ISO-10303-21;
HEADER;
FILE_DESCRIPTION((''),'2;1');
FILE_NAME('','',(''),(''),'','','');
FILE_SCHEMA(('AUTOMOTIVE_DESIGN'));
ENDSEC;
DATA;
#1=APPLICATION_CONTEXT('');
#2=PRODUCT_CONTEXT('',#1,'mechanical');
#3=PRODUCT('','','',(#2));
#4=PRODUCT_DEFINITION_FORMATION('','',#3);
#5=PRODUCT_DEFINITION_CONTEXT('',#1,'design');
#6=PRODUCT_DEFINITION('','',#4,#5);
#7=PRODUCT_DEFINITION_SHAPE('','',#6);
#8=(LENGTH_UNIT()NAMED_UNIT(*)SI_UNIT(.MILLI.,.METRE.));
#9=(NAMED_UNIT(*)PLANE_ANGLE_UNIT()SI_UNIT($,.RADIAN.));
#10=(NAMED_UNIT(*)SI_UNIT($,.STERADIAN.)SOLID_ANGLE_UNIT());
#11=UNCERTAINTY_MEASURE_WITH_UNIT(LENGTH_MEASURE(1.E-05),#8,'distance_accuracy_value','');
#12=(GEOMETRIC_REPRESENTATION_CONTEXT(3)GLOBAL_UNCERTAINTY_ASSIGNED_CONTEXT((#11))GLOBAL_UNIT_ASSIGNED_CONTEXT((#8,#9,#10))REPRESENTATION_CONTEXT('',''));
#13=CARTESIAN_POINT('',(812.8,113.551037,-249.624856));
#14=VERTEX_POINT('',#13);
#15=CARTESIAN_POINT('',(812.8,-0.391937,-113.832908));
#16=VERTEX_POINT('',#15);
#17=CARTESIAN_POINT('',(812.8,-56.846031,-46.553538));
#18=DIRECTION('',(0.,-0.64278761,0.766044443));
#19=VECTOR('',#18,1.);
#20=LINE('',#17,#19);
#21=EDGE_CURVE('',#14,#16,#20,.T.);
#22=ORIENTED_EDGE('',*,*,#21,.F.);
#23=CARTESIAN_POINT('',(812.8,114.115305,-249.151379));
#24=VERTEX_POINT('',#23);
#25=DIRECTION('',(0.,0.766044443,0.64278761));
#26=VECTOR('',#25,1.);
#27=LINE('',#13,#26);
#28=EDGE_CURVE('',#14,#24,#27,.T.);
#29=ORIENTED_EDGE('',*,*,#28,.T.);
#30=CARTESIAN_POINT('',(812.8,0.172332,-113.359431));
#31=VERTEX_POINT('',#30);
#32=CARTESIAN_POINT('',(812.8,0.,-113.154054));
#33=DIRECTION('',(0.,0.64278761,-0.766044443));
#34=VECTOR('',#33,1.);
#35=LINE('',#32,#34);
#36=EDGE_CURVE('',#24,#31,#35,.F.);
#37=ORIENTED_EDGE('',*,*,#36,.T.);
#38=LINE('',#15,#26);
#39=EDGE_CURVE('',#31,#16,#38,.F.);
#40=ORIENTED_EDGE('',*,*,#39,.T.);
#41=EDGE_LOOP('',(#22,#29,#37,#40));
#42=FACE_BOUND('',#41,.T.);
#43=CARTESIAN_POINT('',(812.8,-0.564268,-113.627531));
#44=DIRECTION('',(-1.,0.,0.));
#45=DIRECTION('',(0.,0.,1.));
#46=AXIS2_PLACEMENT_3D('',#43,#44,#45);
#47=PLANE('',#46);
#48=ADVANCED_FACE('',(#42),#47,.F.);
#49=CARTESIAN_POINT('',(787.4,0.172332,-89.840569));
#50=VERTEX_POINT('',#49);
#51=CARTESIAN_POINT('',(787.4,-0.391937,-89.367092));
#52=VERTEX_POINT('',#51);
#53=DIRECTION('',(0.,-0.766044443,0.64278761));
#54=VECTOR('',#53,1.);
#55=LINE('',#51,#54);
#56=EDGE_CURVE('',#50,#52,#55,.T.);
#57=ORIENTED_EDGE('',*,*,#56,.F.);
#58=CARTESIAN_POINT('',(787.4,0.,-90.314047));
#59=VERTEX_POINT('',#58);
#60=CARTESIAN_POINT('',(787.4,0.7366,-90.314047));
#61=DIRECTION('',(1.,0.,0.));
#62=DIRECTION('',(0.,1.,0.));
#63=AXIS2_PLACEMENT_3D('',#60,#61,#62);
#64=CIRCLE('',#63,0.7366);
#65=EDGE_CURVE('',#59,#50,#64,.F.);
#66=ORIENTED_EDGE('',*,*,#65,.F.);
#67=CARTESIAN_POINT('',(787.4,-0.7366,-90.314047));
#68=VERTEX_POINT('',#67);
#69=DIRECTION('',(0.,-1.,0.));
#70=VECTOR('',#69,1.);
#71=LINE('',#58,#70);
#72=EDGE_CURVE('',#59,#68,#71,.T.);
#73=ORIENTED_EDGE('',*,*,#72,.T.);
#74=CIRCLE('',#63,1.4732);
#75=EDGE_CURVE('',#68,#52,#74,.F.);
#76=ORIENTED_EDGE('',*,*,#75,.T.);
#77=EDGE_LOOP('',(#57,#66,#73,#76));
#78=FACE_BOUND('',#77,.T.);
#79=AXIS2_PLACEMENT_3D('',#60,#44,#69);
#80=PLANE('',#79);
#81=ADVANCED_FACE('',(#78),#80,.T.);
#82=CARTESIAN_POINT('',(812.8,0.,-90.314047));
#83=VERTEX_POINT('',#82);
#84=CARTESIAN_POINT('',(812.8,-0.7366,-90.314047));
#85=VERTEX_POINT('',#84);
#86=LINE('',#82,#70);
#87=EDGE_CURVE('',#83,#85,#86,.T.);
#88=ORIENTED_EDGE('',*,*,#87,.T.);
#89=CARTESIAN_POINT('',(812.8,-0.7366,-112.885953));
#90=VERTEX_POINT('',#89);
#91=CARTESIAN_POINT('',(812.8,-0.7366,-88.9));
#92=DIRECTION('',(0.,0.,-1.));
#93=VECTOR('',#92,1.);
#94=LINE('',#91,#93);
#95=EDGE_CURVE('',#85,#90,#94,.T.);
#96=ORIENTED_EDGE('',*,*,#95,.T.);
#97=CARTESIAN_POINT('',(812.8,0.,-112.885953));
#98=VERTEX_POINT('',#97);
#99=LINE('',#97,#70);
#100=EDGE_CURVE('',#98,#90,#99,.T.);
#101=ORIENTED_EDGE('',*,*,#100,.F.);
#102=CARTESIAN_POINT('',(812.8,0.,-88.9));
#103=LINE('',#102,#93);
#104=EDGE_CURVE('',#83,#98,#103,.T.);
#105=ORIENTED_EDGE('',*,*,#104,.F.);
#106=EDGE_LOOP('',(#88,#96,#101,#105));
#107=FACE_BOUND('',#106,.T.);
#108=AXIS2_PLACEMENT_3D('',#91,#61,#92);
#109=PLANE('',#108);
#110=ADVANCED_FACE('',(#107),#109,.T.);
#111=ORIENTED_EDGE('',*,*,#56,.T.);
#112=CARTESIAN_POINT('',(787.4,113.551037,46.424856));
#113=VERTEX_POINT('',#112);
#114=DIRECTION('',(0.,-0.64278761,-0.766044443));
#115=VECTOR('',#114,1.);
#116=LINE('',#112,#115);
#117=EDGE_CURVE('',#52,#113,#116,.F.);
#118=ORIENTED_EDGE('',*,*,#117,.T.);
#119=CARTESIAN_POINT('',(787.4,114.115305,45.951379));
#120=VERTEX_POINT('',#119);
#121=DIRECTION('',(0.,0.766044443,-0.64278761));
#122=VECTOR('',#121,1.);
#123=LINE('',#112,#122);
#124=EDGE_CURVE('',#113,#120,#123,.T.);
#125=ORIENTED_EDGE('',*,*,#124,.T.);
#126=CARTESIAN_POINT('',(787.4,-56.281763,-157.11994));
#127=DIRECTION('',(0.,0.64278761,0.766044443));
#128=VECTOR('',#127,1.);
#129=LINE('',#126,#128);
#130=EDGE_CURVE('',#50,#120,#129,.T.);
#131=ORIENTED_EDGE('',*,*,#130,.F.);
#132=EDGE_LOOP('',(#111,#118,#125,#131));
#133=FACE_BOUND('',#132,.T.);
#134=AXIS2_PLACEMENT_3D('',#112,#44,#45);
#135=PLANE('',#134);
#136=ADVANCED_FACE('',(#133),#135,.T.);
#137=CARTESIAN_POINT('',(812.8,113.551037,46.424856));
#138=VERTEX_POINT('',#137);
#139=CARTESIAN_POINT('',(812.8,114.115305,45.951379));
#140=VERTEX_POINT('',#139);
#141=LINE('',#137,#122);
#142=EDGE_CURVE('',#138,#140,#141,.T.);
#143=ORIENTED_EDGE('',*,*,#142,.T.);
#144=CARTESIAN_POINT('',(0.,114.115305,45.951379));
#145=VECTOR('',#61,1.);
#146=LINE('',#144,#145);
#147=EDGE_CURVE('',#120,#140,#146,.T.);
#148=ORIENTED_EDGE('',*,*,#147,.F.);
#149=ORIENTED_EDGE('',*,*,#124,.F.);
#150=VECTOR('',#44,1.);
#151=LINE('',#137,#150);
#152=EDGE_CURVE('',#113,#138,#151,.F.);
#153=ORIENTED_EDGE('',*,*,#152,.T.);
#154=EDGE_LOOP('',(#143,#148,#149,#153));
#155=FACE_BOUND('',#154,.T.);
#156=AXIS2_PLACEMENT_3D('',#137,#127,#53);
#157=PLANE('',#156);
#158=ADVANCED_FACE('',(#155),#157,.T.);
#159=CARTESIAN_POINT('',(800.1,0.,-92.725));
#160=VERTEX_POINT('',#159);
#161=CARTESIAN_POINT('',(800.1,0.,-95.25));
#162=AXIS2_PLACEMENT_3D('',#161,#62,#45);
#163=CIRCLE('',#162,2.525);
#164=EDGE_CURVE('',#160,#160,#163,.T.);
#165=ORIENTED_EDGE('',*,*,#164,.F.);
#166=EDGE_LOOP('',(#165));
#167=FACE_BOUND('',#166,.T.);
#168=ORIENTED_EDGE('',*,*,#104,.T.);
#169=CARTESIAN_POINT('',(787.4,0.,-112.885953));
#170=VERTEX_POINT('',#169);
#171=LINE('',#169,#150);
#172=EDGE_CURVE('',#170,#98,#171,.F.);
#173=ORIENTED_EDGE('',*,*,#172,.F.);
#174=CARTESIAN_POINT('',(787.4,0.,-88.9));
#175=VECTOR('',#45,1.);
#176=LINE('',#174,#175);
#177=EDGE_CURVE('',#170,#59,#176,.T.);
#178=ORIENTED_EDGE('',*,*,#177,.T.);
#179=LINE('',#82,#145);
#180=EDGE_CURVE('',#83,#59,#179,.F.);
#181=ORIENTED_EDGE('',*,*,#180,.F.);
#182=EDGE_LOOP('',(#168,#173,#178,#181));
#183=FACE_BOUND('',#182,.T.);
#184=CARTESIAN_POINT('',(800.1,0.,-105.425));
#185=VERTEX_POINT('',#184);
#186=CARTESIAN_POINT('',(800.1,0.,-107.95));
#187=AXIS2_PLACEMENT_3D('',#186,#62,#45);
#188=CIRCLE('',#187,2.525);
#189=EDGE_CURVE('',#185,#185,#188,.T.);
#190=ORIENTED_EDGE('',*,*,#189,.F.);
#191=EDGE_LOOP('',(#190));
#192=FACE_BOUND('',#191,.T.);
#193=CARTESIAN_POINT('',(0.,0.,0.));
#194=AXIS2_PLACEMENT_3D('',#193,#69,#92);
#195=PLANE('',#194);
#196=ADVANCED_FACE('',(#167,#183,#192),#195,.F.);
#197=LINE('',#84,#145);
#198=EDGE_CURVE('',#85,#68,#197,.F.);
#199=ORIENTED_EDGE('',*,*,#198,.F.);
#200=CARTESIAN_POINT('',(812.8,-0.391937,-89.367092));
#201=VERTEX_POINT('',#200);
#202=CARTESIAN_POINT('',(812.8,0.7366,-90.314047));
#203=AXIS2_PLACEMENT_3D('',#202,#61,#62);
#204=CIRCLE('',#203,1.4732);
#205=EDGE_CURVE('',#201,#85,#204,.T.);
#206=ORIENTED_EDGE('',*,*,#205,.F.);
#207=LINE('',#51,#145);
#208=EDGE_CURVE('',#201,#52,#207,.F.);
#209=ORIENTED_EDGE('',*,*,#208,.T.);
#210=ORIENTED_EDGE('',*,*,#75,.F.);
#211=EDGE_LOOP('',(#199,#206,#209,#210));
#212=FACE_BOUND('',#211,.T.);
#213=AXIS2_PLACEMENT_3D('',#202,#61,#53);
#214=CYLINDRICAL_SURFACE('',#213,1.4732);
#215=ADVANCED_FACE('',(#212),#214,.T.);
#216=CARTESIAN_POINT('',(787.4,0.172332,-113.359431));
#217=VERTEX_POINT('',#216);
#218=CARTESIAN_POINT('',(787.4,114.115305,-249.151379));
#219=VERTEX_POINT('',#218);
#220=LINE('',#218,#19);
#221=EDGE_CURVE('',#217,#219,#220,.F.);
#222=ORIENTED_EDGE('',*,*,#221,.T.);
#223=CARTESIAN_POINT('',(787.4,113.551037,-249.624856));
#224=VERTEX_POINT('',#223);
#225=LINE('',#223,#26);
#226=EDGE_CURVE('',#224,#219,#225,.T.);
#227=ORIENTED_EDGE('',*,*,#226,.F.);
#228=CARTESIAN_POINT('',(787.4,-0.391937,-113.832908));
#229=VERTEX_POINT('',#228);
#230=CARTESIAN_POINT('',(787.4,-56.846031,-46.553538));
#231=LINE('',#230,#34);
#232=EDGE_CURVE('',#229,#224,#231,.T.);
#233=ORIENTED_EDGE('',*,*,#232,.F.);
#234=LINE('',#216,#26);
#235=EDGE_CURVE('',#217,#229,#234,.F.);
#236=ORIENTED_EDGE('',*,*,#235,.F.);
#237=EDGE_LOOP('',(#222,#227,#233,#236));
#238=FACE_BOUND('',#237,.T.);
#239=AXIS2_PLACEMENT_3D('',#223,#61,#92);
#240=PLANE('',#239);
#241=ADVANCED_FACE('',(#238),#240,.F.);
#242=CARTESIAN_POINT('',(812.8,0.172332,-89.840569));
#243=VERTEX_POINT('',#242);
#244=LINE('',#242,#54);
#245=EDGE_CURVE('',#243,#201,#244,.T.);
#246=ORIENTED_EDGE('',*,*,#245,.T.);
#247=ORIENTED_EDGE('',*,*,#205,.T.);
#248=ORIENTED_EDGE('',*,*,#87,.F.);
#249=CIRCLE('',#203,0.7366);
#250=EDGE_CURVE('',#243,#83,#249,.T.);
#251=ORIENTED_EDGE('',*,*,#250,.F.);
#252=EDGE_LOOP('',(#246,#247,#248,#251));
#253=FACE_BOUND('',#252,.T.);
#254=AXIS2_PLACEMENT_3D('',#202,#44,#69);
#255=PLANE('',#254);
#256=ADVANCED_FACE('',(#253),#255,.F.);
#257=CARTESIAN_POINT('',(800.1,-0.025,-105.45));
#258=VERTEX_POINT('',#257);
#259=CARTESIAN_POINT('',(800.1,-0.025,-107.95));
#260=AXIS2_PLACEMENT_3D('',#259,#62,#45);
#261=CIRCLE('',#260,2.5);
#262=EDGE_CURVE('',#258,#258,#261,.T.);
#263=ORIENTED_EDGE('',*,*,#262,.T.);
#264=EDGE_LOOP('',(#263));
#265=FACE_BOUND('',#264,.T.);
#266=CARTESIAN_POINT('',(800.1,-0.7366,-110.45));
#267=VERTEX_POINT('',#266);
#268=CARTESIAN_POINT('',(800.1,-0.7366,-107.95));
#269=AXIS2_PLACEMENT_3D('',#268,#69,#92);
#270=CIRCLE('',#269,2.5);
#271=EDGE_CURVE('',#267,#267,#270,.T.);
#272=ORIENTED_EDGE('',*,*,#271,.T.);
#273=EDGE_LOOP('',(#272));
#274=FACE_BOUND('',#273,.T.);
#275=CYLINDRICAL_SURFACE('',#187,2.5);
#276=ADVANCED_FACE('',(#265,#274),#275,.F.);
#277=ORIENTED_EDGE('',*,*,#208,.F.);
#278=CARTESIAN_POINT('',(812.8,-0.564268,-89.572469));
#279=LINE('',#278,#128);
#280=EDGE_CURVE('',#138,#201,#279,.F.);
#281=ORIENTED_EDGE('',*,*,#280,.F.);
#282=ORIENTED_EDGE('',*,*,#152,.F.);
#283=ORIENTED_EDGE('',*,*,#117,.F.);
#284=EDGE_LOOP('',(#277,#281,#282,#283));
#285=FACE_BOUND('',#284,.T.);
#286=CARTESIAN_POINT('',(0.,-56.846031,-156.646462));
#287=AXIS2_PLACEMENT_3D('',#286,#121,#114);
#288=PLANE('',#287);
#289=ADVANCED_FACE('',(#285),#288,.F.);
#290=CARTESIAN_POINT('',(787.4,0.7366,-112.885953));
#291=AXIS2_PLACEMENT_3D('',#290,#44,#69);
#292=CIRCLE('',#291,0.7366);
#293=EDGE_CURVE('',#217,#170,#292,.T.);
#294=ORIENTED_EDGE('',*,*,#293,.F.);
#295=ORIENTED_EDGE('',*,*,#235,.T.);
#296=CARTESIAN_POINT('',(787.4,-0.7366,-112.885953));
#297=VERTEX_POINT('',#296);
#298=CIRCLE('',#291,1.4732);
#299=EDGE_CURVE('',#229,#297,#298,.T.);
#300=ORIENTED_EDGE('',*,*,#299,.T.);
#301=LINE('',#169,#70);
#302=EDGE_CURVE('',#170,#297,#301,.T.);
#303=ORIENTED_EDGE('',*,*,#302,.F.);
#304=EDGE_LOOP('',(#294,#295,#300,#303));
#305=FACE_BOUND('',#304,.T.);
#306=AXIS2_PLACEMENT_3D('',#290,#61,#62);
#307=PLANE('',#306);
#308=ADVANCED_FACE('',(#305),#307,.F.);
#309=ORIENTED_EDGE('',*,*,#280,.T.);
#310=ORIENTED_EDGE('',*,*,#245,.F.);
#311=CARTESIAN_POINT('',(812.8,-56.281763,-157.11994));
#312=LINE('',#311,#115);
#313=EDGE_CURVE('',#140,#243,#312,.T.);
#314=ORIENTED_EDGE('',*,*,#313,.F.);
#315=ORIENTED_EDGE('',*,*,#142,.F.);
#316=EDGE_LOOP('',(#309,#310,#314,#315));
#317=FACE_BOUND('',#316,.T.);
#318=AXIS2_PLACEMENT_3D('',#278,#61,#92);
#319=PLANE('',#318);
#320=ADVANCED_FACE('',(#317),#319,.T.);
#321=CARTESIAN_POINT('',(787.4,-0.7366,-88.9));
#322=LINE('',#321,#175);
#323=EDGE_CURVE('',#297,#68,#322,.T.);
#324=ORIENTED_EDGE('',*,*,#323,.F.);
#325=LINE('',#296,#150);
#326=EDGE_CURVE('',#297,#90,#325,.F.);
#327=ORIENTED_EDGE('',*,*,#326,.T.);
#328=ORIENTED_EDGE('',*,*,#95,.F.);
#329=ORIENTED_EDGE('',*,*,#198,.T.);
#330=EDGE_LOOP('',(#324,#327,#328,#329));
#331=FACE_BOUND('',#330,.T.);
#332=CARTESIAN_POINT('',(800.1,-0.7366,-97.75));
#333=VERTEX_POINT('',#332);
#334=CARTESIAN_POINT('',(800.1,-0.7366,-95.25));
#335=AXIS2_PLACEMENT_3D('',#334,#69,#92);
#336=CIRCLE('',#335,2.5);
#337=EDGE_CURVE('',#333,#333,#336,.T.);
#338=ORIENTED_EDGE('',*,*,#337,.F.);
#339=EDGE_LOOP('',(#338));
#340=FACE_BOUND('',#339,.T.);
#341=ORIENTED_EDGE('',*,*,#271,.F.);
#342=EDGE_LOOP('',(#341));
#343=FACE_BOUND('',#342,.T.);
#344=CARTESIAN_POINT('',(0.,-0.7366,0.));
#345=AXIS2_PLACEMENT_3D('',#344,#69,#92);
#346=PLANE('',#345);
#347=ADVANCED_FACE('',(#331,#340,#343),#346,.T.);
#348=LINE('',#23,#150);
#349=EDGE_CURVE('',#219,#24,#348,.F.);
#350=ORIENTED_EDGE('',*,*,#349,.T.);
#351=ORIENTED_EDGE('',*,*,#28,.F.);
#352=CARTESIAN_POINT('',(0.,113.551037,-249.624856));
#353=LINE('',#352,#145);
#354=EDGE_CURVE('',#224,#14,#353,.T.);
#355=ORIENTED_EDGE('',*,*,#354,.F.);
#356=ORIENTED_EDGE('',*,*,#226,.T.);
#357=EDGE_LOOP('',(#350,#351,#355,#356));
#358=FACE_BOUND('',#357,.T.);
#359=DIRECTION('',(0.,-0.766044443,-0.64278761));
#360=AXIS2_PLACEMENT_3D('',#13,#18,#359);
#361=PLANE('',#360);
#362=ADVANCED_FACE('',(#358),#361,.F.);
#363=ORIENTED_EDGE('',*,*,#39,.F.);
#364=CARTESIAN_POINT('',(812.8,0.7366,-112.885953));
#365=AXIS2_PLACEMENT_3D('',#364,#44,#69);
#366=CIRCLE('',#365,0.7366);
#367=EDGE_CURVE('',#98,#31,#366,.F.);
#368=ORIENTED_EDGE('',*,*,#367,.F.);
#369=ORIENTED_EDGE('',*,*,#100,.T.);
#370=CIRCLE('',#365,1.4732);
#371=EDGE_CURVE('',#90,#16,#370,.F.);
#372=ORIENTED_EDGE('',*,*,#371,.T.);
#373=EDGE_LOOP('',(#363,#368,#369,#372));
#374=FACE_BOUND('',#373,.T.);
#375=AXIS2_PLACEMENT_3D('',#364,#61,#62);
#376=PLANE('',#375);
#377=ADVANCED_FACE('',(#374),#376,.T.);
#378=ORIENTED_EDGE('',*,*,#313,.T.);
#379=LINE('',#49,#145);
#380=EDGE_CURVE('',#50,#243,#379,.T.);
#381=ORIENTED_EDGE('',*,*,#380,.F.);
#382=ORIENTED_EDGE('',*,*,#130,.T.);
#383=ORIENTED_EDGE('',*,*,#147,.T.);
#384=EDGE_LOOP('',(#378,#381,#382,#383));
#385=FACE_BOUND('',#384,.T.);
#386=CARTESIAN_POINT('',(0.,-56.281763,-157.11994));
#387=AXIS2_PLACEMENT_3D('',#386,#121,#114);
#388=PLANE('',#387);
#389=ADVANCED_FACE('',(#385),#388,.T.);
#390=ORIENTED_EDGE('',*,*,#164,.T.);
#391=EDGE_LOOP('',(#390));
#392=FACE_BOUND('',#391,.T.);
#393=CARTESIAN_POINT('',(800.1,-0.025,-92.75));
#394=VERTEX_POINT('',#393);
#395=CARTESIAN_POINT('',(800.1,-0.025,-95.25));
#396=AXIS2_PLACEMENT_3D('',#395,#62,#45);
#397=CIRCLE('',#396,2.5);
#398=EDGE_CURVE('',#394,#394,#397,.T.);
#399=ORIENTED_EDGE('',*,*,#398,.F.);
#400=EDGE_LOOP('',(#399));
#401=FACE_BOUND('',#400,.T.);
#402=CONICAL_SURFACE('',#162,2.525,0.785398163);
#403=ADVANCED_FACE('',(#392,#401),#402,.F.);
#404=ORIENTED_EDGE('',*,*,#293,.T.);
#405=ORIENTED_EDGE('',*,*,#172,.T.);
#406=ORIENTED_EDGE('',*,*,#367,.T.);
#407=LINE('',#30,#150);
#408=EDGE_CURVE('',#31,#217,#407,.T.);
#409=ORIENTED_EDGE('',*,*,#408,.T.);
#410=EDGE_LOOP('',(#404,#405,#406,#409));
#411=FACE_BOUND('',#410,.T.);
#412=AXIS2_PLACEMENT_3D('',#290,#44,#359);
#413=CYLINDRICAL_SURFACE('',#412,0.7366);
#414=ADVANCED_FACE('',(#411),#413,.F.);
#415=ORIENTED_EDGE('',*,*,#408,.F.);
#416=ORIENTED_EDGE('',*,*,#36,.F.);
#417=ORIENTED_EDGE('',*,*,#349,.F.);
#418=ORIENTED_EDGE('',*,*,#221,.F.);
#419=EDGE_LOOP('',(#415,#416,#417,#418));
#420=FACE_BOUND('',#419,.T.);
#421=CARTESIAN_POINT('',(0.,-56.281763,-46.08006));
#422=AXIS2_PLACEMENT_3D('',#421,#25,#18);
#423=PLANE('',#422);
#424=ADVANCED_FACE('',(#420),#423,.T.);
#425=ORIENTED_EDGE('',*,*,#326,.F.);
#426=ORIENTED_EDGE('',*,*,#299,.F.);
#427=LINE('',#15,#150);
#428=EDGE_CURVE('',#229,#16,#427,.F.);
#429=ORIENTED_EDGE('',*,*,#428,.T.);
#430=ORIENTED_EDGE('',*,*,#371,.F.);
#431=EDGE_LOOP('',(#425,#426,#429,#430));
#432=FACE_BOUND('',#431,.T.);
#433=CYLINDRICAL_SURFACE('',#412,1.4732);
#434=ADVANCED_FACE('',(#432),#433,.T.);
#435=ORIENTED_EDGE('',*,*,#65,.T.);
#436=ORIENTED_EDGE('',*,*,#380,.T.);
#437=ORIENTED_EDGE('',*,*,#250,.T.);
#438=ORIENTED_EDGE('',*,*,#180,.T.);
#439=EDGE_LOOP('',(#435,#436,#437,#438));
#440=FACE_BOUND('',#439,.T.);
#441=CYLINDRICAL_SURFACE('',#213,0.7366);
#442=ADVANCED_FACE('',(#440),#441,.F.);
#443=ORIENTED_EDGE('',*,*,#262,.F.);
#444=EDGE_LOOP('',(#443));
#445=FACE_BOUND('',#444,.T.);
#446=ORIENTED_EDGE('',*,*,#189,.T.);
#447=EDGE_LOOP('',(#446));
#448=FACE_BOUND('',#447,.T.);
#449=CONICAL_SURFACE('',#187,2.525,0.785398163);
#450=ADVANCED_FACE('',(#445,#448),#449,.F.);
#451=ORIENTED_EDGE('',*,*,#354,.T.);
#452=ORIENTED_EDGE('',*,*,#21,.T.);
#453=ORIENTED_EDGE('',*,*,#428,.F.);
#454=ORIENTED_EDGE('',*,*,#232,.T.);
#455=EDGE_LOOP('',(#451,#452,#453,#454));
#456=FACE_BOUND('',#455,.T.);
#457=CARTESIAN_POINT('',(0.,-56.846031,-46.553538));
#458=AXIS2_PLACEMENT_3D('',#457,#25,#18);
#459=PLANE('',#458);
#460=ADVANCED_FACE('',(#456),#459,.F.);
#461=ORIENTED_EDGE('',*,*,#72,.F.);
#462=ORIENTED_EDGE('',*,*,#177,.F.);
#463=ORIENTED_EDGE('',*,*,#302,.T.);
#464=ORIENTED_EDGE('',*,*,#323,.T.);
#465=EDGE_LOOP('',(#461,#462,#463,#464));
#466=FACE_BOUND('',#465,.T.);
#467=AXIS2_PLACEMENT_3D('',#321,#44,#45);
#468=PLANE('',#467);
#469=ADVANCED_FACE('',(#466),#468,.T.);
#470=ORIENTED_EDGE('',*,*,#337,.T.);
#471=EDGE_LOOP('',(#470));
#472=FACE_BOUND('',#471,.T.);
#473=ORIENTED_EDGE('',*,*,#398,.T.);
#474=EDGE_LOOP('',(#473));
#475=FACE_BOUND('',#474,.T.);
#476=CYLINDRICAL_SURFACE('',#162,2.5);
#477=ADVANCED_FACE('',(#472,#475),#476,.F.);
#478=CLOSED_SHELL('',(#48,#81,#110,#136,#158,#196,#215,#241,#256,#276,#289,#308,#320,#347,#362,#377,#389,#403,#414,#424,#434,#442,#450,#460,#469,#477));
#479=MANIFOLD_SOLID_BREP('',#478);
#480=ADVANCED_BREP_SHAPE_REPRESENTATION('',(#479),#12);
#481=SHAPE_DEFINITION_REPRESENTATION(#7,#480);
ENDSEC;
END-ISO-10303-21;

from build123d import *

# Parameters (mm, degrees)
SKETCH5_W                       = 25.4
SKETCH5_H                       = 25.4
BASE_FLANGE1_DEPTH              = 0.7366
EDGE_FLANGE1_START              = 787.4
EDGE_FLANGE1_DEPTH              = 25.4
EDGE_FLANGE1_2_DEPTH            = 25.4
F_5_0MM_DOWEL_HOLE1_D           = 5
F_5_0MM_DOWEL_HOLE1_DEPTH       = 25.4
F_5_0MM_DOWEL_HOLE1_CSINK_D     = 5.05
F_5_0MM_DOWEL_HOLE1_CSINK_ANGLE = 90
F_5_0MM_DOWEL_HOLE1_TIP         = 1.502151548


# Read off the part's stored shape, not the designer's step: Edge-Flange1
# Sheet-metal steps are written as plain solids
with BuildPart() as part:
    # Sketch5 → Base-Flange1 (new body)
    with BuildSketch(Plane(origin=(0, 0, 0), x_dir=(1, 0, 0), z_dir=(0, 1, 0))):
        with Locations((800.1, 101.6)):
            Rectangle(SKETCH5_W, SKETCH5_H)
    extrude(amount=-BASE_FLANGE1_DEPTH)

    # Edge-Flange1 outline → Edge-Flange1 (cut)
    with BuildSketch(Plane.YZ.offset(EDGE_FLANGE1_START)):
        with BuildLine():
            Line((0, -114.3), (-0.391936674, -113.832908061))
            ThreePointArc((-0.391936674, -113.832908061), (-0.647755169, -113.38981743), (-0.7366, -112.885953355))
            Line((-0.7366, -112.885953355), (-0.7366, -114.3))
            Line((-0.7366, -114.3), (0, -114.3))
        make_face()
    edge_flange1 = extrude(amount=EDGE_FLANGE1_DEPTH, mode=Mode.SUBTRACT)

    # Edge-Flange1 2 outline → Edge-Flange1 2 (add)
    with BuildSketch(Plane.YZ.offset(EDGE_FLANGE1_START)):
        with BuildLine():
            Line((0, -112.885953355), (0, -114.3))
            Line((0, -114.3), (113.551037002, -249.62485629))
            Line((113.551037002, -249.62485629), (114.115305339, -249.151378937))
            Line((114.115305339, -249.151378937), (0.172331663, -113.359430708))
            ThreePointArc((0.172331663, -113.359430708), (0.044422416, -113.137885392), (0, -112.885953355))
        make_face()
    edge_flange1_2 = extrude(amount=EDGE_FLANGE1_2_DEPTH)

    # Mirror1: Edge-Flange1, Edge-Flange1 2 across plane
    add(edge_flange1.mirror(Plane.XY.offset(-101.6)), mode=Mode.SUBTRACT)
    add(edge_flange1_2.mirror(Plane.XY.offset(-101.6)))

    # Ø5.0mm Dowel Hole1
    with Locations(Plane(origin=(0, 0, 0), x_dir=(1, 0, 0), z_dir=(0, 1, 0))):
        with Locations((800.1, 107.95), (800.1, 95.25)):
            CounterSinkHole(F_5_0MM_DOWEL_HOLE1_D / 2, F_5_0MM_DOWEL_HOLE1_CSINK_D / 2, depth=F_5_0MM_DOWEL_HOLE1_DEPTH, counter_sink_angle=F_5_0MM_DOWEL_HOLE1_CSINK_ANGLE)
            with Locations((0, 0, -(F_5_0MM_DOWEL_HOLE1_DEPTH + F_5_0MM_DOWEL_HOLE1_TIP / 2))):  # 118° drill point
                Cone(0, F_5_0MM_DOWEL_HOLE1_D / 2, F_5_0MM_DOWEL_HOLE1_TIP, mode=Mode.SUBTRACT)


solid = part.part
